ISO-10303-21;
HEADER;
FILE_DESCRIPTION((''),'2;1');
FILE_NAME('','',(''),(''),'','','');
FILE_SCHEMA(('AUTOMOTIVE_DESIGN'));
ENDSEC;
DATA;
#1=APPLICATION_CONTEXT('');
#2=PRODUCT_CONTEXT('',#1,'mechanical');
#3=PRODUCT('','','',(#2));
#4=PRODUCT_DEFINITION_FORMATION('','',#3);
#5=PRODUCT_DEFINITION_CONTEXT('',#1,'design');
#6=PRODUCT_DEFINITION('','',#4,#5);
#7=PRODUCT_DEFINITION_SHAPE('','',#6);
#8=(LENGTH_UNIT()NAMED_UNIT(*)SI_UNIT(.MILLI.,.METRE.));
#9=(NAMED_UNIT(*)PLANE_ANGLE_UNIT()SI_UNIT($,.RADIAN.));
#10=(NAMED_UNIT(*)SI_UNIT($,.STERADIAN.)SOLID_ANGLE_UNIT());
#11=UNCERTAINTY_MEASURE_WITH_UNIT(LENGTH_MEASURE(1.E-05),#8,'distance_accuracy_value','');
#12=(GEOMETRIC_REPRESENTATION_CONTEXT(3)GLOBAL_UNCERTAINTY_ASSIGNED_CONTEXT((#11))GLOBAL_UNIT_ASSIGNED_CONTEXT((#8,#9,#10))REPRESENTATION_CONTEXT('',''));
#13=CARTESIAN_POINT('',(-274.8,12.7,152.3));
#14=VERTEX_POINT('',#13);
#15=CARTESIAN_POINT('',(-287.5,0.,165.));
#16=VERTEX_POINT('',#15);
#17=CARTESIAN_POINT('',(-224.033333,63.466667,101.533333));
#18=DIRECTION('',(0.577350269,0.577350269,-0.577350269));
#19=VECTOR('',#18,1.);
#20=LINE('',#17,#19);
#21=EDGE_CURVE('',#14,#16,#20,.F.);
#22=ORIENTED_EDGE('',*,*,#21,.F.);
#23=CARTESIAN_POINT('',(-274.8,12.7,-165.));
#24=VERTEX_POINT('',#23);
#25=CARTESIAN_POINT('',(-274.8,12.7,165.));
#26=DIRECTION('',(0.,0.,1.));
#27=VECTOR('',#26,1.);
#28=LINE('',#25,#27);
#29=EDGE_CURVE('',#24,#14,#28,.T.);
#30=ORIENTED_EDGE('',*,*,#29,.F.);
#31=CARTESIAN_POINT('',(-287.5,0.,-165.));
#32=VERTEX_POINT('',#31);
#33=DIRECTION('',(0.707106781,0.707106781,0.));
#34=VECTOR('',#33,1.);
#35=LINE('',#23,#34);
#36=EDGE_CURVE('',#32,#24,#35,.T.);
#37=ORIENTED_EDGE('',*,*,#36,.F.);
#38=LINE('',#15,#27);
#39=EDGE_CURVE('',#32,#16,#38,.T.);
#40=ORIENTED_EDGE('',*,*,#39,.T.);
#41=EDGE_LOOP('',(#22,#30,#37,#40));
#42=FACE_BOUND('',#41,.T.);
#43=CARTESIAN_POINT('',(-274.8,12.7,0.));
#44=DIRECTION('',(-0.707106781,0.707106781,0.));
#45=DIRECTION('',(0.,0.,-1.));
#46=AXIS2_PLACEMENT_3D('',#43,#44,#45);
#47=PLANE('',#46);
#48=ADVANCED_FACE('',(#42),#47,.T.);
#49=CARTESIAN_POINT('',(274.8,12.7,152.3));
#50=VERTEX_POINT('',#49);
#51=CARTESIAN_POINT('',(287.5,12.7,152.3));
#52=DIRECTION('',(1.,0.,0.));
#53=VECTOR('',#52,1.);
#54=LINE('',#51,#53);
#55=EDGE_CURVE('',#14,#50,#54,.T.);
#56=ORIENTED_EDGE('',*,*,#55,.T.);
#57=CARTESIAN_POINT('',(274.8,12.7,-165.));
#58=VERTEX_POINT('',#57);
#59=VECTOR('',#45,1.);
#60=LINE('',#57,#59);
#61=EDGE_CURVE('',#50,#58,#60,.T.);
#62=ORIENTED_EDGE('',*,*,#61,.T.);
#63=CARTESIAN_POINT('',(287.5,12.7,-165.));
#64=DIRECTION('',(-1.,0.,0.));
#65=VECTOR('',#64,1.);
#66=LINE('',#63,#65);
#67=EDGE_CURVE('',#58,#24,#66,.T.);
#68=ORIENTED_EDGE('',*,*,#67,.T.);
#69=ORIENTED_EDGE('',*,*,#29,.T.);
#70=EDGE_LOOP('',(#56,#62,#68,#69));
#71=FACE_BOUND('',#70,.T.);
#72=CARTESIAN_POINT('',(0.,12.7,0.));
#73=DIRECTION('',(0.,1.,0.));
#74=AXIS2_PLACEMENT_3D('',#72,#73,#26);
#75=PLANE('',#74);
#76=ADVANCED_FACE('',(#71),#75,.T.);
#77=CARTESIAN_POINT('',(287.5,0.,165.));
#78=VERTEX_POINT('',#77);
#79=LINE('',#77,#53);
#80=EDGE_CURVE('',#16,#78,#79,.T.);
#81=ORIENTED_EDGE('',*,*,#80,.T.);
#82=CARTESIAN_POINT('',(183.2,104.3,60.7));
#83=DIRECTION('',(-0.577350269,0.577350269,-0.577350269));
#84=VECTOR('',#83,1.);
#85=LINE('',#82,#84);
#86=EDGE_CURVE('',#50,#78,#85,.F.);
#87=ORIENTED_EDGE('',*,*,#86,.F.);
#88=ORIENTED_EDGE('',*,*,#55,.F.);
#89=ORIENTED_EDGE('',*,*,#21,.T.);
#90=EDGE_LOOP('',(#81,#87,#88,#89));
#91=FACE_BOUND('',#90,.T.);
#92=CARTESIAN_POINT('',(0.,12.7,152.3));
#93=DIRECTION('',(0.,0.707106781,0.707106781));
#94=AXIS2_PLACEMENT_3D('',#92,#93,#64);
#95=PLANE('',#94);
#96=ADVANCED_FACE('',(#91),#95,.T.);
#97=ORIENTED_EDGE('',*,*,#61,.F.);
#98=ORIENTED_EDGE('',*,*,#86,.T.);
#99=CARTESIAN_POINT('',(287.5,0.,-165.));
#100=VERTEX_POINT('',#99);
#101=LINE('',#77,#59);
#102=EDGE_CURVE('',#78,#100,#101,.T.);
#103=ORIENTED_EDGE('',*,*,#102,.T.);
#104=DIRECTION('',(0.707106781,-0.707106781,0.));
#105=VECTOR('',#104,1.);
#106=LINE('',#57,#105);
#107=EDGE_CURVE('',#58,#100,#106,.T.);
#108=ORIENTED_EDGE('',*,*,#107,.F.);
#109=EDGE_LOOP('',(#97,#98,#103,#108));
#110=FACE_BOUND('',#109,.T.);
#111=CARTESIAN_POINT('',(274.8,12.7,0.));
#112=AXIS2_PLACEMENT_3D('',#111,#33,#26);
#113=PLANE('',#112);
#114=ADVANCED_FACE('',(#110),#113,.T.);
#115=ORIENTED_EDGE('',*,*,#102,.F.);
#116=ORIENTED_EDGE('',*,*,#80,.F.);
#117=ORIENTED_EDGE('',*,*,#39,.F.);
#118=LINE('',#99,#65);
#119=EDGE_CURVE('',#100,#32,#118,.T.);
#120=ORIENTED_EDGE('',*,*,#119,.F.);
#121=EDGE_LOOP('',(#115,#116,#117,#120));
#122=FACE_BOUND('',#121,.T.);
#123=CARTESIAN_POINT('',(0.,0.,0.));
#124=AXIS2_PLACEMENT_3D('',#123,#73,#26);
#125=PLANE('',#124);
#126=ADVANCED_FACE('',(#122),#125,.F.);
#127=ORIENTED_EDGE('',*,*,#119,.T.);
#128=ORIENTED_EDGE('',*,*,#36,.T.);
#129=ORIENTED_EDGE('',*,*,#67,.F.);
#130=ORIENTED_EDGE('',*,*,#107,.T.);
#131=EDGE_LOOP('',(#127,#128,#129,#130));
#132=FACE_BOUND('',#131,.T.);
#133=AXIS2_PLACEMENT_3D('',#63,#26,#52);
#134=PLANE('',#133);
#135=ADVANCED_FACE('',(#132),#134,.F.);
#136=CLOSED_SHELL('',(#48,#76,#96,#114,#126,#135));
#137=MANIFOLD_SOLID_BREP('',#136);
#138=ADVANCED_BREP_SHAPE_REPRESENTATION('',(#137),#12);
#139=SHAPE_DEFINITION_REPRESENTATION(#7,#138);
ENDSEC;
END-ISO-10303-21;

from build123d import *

# Parameters (mm, degrees)
SKETCH1_W           = 575
SKETCH1_H           = 330
BOSS_EXTRUDE1_DEPTH = 12.7
CHAMFER1_SIZE       = 12.7


with BuildPart() as part:
    # Sketch1 → Boss-Extrude1 (new body)
    with BuildSketch(Plane(origin=(0, 0, 0), x_dir=(1, 0, 0), z_dir=(0, 1, 0))):
        Rectangle(SKETCH1_W, SKETCH1_H)
    extrude(amount=BOSS_EXTRUDE1_DEPTH)

    # Chamfer1
    # the kernel refuses this chamfer: 12.7 mm, written as the material it takes off along each edge
    with BuildSketch(Plane(origin=(287.5, 12.7, -197.660373947), x_dir=(0.027495876610585654, -0.9996219169112966, 0), z_dir=(0, 0, 1)), Plane(origin=(-287.5, 12.7, 197.660373947), x_dir=(-0.027495876610585654, -0.9996219169112966, 0), z_dir=(0, 0, -1))) as chamfer1_piece_1:
        Polygon((CHAMFER1_SIZE * 0.999621916911, -CHAMFER1_SIZE * 0.0274958766106), (-CHAMFER1_SIZE * 0.0274958766106, -CHAMFER1_SIZE * 0.999621916911), (0, 0), align=None)
    extrude(amount=395.320747894, mode=Mode.SUBTRACT)
    with BuildSketch(Plane(origin=(320.160373947, 12.7, 165), x_dir=(0, -0.9996219169112966, 0.027495876610585654), z_dir=(-1, 0, 0))) as chamfer1_piece_2:
        Polygon((CHAMFER1_SIZE * 0.999621916911, -CHAMFER1_SIZE * 0.0274958766106), (-CHAMFER1_SIZE * 0.0274958766106, -CHAMFER1_SIZE * 0.999621916911), (0, 0), align=None)
    extrude(amount=640.320747894, mode=Mode.SUBTRACT)


solid = part.part
